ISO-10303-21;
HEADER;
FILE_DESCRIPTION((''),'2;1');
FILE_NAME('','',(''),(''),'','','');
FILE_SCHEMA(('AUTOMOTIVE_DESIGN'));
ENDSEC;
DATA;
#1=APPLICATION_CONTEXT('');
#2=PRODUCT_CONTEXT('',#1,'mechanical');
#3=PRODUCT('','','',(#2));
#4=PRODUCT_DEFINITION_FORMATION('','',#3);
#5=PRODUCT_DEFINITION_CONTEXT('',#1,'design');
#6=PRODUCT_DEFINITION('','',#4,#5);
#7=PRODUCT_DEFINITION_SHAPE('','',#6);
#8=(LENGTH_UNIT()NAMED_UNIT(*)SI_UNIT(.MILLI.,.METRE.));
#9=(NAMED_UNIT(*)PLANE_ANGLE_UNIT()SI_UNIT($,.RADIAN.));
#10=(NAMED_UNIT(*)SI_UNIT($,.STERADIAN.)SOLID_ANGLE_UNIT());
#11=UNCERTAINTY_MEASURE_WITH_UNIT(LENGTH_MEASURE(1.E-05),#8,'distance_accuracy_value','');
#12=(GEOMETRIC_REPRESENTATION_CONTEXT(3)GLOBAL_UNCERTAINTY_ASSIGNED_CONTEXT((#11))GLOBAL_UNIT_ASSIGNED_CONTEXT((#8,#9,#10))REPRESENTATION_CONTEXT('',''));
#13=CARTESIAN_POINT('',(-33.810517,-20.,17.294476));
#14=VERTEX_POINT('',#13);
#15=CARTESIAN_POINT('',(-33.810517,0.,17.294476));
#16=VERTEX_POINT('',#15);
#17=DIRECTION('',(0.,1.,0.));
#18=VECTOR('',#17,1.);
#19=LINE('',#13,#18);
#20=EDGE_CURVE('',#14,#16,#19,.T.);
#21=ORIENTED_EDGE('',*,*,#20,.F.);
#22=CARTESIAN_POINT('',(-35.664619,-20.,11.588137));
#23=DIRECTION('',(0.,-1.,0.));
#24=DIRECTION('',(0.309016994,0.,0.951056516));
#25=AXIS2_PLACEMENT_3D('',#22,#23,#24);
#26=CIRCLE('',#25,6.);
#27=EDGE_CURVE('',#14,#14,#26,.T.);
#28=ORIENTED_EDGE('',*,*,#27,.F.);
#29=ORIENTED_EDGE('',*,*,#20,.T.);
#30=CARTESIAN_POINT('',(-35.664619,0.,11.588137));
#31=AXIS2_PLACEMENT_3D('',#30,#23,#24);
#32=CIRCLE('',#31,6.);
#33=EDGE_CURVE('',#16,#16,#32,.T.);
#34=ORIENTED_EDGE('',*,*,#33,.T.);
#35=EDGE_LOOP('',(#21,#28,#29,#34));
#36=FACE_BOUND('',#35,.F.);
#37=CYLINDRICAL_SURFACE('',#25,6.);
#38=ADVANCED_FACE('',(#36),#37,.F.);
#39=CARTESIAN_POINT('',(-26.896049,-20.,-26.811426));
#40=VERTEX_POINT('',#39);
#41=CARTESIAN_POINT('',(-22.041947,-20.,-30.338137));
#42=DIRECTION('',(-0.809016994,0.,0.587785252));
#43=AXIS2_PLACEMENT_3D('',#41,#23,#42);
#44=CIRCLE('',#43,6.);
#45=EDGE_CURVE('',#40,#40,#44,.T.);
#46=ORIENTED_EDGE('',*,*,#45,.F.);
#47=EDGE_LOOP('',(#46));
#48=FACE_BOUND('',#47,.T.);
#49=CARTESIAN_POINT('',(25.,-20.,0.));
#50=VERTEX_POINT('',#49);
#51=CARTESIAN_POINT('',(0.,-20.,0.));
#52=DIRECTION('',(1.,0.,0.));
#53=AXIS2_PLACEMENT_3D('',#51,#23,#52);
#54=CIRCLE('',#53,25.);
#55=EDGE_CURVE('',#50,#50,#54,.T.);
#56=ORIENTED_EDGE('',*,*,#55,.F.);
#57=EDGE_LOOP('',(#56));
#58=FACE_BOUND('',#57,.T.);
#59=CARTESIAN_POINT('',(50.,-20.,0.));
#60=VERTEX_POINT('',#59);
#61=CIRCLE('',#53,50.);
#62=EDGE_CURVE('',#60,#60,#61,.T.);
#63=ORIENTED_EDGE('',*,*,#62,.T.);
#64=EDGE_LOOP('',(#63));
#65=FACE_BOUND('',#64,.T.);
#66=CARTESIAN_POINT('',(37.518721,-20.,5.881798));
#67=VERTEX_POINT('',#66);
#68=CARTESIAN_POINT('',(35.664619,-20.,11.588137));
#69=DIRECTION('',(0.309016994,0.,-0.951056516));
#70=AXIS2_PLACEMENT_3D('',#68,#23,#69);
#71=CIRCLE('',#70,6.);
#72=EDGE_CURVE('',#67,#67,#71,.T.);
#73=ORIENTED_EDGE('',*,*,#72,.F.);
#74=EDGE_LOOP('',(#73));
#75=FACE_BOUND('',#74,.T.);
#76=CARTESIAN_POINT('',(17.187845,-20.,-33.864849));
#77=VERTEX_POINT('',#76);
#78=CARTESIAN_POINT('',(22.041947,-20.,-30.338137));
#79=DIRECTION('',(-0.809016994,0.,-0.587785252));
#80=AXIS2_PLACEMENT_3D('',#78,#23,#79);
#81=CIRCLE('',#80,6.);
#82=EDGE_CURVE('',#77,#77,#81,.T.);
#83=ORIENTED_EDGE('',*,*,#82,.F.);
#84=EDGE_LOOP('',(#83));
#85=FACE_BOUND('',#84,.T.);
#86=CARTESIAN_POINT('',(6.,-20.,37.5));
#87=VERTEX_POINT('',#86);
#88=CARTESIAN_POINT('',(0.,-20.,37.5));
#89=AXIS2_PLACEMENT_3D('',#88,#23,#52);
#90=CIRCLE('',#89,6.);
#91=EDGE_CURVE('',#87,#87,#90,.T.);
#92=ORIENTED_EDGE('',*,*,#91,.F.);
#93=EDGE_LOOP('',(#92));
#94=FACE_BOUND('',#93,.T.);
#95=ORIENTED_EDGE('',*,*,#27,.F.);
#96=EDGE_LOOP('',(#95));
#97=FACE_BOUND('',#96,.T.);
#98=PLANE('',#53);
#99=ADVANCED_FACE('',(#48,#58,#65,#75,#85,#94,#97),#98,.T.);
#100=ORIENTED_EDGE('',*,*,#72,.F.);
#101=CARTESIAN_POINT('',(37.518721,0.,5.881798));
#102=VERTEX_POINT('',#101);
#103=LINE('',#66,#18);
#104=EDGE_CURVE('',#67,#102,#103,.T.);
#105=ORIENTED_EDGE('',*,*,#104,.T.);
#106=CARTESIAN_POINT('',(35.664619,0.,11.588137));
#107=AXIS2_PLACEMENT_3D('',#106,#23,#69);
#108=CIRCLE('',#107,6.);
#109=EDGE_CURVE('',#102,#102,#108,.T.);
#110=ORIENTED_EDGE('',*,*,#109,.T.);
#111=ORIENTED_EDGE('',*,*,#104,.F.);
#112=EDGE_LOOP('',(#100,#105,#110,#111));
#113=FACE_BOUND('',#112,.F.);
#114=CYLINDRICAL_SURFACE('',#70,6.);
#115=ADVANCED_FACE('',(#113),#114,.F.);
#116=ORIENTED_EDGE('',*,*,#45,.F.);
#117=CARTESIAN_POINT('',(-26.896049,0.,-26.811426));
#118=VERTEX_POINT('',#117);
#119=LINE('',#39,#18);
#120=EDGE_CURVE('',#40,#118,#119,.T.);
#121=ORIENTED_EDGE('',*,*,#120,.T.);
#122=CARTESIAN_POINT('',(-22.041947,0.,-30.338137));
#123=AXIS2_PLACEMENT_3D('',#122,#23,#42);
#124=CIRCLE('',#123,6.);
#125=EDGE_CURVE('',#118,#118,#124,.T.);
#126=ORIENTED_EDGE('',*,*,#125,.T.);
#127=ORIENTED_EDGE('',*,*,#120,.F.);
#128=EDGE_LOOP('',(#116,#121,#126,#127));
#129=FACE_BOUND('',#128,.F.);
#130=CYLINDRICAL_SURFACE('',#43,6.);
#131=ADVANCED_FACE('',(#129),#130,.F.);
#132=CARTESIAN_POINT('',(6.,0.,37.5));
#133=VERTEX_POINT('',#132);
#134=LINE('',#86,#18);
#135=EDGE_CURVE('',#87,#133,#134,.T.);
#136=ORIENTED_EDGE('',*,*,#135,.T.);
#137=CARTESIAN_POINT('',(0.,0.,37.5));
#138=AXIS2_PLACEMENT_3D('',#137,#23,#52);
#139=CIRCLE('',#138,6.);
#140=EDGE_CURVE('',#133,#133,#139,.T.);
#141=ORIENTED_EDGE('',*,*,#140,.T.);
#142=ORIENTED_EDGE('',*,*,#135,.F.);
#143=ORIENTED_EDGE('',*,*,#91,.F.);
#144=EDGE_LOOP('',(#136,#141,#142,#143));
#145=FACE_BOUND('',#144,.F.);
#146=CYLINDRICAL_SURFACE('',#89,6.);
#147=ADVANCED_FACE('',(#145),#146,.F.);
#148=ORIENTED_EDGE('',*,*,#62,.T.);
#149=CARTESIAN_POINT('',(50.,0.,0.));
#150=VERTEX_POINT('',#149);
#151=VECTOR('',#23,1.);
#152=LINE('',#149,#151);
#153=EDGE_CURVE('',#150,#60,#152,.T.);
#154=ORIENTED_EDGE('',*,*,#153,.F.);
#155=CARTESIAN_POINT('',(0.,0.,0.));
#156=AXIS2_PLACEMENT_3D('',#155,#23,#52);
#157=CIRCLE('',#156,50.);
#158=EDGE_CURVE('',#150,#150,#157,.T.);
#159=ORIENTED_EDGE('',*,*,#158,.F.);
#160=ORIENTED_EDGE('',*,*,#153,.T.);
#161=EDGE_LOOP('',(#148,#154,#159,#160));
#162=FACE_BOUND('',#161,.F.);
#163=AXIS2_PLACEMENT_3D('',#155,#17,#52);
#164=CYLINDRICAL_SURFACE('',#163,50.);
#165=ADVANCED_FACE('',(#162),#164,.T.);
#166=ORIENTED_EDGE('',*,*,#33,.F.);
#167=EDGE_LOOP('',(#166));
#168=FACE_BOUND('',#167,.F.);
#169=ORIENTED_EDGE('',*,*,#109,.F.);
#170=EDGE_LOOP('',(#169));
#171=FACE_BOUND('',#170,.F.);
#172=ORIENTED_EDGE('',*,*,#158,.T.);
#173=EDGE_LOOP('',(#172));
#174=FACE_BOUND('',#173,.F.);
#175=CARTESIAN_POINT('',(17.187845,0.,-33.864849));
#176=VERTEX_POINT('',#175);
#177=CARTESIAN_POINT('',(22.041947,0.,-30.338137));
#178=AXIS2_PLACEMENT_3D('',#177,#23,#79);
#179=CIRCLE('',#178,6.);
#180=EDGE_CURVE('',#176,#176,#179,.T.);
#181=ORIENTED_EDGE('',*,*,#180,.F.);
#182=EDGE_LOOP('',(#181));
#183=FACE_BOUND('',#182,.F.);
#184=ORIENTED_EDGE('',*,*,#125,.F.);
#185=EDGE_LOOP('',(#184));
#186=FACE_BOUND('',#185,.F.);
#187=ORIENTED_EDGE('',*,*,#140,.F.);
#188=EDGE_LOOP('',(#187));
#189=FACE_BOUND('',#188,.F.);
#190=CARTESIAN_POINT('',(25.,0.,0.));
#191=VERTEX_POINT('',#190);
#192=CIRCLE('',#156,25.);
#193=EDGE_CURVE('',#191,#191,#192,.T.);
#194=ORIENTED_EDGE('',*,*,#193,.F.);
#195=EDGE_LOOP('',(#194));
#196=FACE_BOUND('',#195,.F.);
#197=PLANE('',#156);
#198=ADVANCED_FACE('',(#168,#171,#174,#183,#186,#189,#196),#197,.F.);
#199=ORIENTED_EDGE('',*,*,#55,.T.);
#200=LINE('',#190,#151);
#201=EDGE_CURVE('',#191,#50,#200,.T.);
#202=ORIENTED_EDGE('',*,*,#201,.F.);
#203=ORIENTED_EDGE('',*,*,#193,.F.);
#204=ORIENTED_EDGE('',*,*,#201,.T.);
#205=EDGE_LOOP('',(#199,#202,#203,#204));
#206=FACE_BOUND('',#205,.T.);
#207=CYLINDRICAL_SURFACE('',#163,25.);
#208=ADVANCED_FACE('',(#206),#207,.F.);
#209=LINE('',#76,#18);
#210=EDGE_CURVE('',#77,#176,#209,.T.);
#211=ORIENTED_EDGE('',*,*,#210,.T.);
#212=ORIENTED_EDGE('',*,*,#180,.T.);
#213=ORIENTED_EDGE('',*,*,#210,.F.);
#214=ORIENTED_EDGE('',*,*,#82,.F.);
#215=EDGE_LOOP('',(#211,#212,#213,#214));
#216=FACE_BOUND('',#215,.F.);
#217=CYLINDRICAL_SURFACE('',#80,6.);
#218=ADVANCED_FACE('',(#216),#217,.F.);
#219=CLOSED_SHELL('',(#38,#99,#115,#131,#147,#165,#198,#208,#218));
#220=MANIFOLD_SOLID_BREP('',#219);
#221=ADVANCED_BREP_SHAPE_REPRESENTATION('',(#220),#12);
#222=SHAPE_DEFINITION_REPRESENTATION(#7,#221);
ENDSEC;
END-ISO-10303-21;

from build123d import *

# Parameters (mm, degrees)
F0_R            = 50
F0_R_2          = 25
F1_DEPTH        = 20
F2_R            = 6
F3_DEPTH        = 25
F3_COPIES_COUNT = 5


# Not quite as in the source:
# - a pattern or mirror of a feature is missing from the dataset's text; its kind, count and spacing are read off the source's solid


with BuildPart() as f1:
    # F0 (on Front) → F1 (new body)
    with BuildSketch(Plane.XZ):
        Circle(F0_R)
        Circle(F0_R_2, mode=Mode.SUBTRACT)
    extrude(amount=F1_DEPTH)

    # F2 (on face) → F3 (cut)
    with BuildSketch(Plane.XZ.offset(20)):
        with Locations((0, 37.5)):
            Circle(F2_R)
    f3 = extrude(amount=-F3_DEPTH, mode=Mode.SUBTRACT)

    # F3_copies: F3 ×5 about axis
    f3_copies_axis = Axis((0, 0, 0), (0, 1, 0))
    for i in range(1, F3_COPIES_COUNT):
        add(f3.rotate(f3_copies_axis, i * 360 / F3_COPIES_COUNT), mode=Mode.SUBTRACT)


solid = f1.part
